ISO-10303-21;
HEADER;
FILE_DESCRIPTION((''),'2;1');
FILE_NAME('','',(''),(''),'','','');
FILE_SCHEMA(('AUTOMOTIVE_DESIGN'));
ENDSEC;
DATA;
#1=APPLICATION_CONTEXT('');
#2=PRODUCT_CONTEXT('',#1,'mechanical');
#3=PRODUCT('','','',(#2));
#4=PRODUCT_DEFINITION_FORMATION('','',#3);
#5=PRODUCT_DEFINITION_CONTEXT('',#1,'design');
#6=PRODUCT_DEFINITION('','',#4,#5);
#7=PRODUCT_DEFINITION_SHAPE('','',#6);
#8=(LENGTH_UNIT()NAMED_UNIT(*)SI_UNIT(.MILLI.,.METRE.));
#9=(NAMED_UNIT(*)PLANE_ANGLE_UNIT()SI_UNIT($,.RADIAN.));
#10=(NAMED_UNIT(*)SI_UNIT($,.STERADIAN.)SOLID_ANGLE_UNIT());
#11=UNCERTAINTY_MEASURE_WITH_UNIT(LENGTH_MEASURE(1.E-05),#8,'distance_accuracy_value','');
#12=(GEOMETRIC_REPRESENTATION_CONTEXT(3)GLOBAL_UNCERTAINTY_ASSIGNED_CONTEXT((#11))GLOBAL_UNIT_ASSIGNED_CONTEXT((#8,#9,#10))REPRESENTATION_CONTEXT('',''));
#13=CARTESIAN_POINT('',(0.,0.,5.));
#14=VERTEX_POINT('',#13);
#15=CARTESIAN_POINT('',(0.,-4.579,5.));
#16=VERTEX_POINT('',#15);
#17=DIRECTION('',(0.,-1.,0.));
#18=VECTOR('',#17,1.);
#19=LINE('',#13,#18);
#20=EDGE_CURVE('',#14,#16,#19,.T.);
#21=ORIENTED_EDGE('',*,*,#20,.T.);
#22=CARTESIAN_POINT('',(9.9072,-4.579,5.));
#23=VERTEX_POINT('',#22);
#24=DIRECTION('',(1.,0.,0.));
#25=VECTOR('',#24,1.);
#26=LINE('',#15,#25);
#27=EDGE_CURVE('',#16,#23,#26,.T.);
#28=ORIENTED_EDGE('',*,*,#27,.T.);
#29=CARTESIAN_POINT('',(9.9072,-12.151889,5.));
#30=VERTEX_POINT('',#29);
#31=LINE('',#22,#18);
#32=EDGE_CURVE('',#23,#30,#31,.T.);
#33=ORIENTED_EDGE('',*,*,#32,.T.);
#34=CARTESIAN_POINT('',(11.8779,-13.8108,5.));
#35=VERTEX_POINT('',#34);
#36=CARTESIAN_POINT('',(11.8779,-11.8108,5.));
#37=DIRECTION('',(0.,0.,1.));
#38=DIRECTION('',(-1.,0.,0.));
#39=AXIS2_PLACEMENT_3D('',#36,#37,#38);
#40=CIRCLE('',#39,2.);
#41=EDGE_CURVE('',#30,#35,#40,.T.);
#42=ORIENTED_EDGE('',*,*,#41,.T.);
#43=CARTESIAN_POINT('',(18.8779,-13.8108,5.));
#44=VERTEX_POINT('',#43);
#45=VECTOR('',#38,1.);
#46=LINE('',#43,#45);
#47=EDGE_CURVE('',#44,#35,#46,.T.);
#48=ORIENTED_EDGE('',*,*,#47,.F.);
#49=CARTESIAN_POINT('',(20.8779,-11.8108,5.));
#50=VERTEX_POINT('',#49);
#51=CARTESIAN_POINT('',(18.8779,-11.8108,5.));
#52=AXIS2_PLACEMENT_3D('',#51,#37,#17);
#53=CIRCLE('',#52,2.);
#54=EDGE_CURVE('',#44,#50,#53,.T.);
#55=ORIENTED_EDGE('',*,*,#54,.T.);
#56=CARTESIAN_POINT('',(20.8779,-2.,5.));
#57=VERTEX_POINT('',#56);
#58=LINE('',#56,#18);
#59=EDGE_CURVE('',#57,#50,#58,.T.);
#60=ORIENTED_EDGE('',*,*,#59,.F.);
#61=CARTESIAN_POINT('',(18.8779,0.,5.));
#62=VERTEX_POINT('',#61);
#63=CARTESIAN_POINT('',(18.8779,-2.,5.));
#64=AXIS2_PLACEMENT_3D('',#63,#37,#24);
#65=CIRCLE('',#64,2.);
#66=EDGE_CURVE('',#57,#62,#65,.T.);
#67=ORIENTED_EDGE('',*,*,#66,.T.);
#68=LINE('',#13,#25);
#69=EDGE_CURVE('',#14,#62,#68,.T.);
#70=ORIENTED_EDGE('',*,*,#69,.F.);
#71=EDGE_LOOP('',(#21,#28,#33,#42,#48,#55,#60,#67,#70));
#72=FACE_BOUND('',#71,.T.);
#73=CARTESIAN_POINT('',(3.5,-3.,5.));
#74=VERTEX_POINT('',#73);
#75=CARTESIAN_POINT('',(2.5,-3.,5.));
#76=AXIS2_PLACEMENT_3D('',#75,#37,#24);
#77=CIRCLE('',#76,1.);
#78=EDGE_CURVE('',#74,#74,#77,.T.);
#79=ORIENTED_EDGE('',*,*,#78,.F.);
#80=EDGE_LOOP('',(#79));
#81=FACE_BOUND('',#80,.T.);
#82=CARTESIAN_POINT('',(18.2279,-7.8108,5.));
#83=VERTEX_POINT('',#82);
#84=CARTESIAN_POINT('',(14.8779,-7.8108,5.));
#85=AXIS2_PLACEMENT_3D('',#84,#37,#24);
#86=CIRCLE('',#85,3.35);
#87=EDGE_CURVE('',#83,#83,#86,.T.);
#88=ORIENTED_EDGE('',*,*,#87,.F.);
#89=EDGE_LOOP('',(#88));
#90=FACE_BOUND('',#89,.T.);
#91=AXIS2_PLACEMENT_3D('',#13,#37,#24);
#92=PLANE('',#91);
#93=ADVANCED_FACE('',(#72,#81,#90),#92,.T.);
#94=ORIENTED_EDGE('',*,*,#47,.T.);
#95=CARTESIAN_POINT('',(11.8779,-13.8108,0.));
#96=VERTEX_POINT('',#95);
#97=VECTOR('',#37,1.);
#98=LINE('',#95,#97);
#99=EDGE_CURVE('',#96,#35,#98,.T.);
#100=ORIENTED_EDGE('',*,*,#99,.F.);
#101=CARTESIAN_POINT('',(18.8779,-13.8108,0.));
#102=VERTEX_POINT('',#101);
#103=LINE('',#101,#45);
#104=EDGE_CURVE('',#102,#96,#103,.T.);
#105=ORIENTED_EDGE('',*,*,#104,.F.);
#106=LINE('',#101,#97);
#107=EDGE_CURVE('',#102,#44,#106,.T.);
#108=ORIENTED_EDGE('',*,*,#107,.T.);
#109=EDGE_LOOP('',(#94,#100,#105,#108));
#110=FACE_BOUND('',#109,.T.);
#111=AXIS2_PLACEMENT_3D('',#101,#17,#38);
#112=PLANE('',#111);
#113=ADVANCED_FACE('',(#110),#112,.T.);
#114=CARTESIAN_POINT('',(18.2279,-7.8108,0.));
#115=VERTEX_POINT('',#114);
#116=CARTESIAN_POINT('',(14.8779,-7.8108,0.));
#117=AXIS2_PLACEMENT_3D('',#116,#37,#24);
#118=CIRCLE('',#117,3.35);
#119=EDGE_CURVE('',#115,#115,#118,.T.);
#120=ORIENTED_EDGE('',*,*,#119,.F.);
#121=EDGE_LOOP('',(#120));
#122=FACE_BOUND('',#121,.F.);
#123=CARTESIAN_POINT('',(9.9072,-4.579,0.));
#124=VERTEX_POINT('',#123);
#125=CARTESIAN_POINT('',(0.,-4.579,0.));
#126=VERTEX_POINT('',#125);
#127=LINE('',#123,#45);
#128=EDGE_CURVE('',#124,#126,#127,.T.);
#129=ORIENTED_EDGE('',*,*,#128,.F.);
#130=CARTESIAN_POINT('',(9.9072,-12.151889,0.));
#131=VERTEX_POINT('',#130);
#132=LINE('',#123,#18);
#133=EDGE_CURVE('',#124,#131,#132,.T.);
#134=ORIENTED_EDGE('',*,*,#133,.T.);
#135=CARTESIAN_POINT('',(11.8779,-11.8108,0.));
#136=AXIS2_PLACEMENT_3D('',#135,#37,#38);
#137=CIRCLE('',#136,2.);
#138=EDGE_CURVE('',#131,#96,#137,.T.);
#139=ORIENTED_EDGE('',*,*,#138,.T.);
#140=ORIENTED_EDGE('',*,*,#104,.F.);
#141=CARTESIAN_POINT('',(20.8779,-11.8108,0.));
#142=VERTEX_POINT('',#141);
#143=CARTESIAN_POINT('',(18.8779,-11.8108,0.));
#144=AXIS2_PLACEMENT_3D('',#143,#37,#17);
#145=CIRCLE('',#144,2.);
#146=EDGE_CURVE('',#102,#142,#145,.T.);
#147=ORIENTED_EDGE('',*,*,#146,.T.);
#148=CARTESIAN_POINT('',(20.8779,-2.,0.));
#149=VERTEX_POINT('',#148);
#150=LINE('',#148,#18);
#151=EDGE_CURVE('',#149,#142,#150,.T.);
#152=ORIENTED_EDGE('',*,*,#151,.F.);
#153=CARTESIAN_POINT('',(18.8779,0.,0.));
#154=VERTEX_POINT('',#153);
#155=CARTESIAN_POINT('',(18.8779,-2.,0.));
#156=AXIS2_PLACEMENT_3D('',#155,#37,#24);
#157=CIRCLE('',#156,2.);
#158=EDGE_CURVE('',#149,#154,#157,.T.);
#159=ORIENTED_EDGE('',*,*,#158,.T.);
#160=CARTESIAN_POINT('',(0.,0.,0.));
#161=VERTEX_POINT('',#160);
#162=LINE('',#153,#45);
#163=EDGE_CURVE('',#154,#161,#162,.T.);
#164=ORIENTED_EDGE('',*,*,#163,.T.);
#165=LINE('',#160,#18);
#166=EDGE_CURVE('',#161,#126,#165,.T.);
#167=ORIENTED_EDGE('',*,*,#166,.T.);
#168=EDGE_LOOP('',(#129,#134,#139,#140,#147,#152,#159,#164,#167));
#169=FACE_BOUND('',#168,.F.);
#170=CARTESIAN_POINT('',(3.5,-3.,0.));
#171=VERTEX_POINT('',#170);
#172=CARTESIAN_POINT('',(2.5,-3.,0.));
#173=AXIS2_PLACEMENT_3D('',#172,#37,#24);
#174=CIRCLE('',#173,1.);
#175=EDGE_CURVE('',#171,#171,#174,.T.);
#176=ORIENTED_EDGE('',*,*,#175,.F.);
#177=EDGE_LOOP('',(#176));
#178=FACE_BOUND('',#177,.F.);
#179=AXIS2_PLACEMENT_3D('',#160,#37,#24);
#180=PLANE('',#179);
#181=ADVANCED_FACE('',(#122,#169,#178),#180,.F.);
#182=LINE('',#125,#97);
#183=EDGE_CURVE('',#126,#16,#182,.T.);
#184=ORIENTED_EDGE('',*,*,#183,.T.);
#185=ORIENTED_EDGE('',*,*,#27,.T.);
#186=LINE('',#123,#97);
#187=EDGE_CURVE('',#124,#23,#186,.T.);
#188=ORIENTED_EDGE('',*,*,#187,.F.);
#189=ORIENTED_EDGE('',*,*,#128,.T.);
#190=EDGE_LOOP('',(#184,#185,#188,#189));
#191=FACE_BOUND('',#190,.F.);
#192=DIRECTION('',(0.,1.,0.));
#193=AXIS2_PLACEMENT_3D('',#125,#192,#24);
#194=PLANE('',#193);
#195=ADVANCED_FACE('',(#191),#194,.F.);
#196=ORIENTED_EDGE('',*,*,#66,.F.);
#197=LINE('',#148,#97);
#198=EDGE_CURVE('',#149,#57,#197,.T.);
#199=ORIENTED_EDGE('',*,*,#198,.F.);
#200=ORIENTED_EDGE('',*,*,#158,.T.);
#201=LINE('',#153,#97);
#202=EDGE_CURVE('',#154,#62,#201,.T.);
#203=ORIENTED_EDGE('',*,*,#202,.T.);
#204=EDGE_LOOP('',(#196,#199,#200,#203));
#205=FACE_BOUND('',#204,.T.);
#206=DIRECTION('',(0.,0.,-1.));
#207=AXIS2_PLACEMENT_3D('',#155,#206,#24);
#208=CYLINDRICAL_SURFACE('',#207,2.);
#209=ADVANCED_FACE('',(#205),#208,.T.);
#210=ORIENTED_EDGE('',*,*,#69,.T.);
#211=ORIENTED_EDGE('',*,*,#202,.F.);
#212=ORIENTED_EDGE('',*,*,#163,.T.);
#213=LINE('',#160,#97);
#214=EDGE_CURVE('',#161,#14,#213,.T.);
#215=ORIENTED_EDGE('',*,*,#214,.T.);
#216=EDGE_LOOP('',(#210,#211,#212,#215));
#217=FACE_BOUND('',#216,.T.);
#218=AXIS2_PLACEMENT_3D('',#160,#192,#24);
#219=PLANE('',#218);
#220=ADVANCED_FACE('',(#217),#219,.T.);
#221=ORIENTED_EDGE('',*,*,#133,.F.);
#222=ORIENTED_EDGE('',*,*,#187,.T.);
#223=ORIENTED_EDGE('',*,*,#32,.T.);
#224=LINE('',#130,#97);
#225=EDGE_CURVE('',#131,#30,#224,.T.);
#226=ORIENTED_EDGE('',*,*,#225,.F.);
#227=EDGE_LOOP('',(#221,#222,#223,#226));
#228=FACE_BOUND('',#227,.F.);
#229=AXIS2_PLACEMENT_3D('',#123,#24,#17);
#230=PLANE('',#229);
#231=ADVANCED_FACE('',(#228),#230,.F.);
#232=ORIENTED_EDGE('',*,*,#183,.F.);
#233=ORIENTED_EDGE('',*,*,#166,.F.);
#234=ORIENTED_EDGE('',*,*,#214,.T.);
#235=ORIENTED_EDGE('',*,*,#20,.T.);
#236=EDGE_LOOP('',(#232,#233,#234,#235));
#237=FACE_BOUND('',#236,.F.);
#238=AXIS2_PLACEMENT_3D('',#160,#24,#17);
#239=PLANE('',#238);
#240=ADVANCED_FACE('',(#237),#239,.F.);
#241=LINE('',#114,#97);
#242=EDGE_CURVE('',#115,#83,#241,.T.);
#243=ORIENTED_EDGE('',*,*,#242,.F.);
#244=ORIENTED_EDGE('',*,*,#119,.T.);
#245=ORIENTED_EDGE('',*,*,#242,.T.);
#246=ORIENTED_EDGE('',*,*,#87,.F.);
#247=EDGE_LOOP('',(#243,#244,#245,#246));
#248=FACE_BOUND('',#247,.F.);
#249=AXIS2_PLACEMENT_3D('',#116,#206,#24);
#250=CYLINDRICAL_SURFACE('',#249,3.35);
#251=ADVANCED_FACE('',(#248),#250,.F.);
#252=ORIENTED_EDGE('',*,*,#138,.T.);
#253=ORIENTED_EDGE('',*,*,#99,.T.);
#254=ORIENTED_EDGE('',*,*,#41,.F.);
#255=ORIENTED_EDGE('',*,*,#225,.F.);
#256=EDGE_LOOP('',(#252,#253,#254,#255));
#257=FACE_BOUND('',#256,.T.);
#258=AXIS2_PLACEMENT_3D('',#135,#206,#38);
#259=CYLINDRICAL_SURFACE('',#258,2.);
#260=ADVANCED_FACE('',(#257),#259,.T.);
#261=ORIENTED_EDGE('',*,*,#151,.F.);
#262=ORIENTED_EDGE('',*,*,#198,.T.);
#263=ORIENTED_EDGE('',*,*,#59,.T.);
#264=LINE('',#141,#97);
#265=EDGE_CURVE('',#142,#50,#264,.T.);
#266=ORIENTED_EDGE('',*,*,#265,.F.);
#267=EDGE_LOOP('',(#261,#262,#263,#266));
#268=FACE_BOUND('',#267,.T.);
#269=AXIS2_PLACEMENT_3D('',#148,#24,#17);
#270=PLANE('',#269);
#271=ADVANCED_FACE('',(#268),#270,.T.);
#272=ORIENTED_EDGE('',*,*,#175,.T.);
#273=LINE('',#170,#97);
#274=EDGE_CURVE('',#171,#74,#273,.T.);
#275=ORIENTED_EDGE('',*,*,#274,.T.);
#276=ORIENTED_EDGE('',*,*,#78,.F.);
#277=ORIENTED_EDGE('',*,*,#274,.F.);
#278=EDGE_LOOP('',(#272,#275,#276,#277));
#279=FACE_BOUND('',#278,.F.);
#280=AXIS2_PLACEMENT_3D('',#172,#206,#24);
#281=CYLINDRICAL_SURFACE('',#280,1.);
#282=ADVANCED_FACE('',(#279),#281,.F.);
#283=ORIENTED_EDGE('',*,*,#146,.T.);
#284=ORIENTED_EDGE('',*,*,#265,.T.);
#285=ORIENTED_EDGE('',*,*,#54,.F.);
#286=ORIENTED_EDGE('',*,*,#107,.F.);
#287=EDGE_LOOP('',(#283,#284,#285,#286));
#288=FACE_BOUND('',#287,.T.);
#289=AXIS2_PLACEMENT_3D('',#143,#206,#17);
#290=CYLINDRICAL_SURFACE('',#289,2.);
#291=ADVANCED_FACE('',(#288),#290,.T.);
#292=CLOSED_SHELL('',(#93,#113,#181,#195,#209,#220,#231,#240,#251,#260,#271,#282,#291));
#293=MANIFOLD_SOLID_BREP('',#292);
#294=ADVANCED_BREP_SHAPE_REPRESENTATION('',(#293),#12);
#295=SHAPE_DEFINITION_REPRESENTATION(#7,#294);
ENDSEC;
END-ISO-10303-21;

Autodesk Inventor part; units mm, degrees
ref_plane "YZ Plane" through (0, 0, 0) normal (1, 0, 0) x (0, 1, 0)
ref_plane "XZ Plane" through (0, 0, 0) normal (0, 1, 0) x (-1, 0, 0)
ref_plane "XY Plane" through (0, 0, 0) normal (0, 0, 1) x (1, 0, 0)
sketch "Skizze1" plane through (0, 0, 0) normal (0, 0, 1) x (1, 0, 0)
  circle A0 centre (2.5, -3) radius 0.5 projected
  line L0 (0, 0) -> (0, -6) projected
  line L1 (0, -6) -> (5, -6) projected
  line L2 (5, 0) -> (5, -6) projected
  line L3 (0, 0) -> (5, 0) projected
  circle A1 centre (14.8779, -7.8108) radius 3.9802 projected
  line L4 (5, 0) -> (18.8779, 0)
  line L5 (20.8779, -2) -> (20.8779, -11.8108)
  line L6 (18.8779, -13.8108) -> (11.8779, -13.8108)
  line L7 (9.8779, -11.8108) -> (9.8779, -6)
  line L8 (9.8779, -6) -> (5, -6)
  arc A2 (9.8779, -11.8108) -> (11.8779, -13.8108) centre (11.8779, -11.8108) ccw
  arc A3 (18.8779, -13.8108) -> (20.8779, -11.8108) centre (18.8779, -11.8108) ccw
  arc A4 (20.8779, -2) -> (18.8779, 0) centre (18.8779, -2) ccw
  line L9 (0, -4.579) -> (9.9072, -4.579)
  line L10 (9.9072, -4.579) -> (9.9072, -13.8108)
  line L11 (9.9072, -13.8108) -> (11.8779, -13.8108)
  circle A5 centre (2.5, -3) radius 1
  circle A6 centre (14.8779, -7.8108) radius 3.35
  point P0 (9.9072, -12.1516)
  dimension "d0" = 6
  dimension "d1" = 5
  dimension "d2" = 6
  dimension "d3" = 2
  dimension "d9" = 2
  dimension "d10" = 6.7
extrude "Extrusion1" add sketch "Skizze1" along normal blind 5 contours L3 L2 L9 L0 | L4 A4 L5 A3 L6 A2 L10 L9 L2 | A1
properties part number "IM_Lensholder_motorized_lensadapter"
